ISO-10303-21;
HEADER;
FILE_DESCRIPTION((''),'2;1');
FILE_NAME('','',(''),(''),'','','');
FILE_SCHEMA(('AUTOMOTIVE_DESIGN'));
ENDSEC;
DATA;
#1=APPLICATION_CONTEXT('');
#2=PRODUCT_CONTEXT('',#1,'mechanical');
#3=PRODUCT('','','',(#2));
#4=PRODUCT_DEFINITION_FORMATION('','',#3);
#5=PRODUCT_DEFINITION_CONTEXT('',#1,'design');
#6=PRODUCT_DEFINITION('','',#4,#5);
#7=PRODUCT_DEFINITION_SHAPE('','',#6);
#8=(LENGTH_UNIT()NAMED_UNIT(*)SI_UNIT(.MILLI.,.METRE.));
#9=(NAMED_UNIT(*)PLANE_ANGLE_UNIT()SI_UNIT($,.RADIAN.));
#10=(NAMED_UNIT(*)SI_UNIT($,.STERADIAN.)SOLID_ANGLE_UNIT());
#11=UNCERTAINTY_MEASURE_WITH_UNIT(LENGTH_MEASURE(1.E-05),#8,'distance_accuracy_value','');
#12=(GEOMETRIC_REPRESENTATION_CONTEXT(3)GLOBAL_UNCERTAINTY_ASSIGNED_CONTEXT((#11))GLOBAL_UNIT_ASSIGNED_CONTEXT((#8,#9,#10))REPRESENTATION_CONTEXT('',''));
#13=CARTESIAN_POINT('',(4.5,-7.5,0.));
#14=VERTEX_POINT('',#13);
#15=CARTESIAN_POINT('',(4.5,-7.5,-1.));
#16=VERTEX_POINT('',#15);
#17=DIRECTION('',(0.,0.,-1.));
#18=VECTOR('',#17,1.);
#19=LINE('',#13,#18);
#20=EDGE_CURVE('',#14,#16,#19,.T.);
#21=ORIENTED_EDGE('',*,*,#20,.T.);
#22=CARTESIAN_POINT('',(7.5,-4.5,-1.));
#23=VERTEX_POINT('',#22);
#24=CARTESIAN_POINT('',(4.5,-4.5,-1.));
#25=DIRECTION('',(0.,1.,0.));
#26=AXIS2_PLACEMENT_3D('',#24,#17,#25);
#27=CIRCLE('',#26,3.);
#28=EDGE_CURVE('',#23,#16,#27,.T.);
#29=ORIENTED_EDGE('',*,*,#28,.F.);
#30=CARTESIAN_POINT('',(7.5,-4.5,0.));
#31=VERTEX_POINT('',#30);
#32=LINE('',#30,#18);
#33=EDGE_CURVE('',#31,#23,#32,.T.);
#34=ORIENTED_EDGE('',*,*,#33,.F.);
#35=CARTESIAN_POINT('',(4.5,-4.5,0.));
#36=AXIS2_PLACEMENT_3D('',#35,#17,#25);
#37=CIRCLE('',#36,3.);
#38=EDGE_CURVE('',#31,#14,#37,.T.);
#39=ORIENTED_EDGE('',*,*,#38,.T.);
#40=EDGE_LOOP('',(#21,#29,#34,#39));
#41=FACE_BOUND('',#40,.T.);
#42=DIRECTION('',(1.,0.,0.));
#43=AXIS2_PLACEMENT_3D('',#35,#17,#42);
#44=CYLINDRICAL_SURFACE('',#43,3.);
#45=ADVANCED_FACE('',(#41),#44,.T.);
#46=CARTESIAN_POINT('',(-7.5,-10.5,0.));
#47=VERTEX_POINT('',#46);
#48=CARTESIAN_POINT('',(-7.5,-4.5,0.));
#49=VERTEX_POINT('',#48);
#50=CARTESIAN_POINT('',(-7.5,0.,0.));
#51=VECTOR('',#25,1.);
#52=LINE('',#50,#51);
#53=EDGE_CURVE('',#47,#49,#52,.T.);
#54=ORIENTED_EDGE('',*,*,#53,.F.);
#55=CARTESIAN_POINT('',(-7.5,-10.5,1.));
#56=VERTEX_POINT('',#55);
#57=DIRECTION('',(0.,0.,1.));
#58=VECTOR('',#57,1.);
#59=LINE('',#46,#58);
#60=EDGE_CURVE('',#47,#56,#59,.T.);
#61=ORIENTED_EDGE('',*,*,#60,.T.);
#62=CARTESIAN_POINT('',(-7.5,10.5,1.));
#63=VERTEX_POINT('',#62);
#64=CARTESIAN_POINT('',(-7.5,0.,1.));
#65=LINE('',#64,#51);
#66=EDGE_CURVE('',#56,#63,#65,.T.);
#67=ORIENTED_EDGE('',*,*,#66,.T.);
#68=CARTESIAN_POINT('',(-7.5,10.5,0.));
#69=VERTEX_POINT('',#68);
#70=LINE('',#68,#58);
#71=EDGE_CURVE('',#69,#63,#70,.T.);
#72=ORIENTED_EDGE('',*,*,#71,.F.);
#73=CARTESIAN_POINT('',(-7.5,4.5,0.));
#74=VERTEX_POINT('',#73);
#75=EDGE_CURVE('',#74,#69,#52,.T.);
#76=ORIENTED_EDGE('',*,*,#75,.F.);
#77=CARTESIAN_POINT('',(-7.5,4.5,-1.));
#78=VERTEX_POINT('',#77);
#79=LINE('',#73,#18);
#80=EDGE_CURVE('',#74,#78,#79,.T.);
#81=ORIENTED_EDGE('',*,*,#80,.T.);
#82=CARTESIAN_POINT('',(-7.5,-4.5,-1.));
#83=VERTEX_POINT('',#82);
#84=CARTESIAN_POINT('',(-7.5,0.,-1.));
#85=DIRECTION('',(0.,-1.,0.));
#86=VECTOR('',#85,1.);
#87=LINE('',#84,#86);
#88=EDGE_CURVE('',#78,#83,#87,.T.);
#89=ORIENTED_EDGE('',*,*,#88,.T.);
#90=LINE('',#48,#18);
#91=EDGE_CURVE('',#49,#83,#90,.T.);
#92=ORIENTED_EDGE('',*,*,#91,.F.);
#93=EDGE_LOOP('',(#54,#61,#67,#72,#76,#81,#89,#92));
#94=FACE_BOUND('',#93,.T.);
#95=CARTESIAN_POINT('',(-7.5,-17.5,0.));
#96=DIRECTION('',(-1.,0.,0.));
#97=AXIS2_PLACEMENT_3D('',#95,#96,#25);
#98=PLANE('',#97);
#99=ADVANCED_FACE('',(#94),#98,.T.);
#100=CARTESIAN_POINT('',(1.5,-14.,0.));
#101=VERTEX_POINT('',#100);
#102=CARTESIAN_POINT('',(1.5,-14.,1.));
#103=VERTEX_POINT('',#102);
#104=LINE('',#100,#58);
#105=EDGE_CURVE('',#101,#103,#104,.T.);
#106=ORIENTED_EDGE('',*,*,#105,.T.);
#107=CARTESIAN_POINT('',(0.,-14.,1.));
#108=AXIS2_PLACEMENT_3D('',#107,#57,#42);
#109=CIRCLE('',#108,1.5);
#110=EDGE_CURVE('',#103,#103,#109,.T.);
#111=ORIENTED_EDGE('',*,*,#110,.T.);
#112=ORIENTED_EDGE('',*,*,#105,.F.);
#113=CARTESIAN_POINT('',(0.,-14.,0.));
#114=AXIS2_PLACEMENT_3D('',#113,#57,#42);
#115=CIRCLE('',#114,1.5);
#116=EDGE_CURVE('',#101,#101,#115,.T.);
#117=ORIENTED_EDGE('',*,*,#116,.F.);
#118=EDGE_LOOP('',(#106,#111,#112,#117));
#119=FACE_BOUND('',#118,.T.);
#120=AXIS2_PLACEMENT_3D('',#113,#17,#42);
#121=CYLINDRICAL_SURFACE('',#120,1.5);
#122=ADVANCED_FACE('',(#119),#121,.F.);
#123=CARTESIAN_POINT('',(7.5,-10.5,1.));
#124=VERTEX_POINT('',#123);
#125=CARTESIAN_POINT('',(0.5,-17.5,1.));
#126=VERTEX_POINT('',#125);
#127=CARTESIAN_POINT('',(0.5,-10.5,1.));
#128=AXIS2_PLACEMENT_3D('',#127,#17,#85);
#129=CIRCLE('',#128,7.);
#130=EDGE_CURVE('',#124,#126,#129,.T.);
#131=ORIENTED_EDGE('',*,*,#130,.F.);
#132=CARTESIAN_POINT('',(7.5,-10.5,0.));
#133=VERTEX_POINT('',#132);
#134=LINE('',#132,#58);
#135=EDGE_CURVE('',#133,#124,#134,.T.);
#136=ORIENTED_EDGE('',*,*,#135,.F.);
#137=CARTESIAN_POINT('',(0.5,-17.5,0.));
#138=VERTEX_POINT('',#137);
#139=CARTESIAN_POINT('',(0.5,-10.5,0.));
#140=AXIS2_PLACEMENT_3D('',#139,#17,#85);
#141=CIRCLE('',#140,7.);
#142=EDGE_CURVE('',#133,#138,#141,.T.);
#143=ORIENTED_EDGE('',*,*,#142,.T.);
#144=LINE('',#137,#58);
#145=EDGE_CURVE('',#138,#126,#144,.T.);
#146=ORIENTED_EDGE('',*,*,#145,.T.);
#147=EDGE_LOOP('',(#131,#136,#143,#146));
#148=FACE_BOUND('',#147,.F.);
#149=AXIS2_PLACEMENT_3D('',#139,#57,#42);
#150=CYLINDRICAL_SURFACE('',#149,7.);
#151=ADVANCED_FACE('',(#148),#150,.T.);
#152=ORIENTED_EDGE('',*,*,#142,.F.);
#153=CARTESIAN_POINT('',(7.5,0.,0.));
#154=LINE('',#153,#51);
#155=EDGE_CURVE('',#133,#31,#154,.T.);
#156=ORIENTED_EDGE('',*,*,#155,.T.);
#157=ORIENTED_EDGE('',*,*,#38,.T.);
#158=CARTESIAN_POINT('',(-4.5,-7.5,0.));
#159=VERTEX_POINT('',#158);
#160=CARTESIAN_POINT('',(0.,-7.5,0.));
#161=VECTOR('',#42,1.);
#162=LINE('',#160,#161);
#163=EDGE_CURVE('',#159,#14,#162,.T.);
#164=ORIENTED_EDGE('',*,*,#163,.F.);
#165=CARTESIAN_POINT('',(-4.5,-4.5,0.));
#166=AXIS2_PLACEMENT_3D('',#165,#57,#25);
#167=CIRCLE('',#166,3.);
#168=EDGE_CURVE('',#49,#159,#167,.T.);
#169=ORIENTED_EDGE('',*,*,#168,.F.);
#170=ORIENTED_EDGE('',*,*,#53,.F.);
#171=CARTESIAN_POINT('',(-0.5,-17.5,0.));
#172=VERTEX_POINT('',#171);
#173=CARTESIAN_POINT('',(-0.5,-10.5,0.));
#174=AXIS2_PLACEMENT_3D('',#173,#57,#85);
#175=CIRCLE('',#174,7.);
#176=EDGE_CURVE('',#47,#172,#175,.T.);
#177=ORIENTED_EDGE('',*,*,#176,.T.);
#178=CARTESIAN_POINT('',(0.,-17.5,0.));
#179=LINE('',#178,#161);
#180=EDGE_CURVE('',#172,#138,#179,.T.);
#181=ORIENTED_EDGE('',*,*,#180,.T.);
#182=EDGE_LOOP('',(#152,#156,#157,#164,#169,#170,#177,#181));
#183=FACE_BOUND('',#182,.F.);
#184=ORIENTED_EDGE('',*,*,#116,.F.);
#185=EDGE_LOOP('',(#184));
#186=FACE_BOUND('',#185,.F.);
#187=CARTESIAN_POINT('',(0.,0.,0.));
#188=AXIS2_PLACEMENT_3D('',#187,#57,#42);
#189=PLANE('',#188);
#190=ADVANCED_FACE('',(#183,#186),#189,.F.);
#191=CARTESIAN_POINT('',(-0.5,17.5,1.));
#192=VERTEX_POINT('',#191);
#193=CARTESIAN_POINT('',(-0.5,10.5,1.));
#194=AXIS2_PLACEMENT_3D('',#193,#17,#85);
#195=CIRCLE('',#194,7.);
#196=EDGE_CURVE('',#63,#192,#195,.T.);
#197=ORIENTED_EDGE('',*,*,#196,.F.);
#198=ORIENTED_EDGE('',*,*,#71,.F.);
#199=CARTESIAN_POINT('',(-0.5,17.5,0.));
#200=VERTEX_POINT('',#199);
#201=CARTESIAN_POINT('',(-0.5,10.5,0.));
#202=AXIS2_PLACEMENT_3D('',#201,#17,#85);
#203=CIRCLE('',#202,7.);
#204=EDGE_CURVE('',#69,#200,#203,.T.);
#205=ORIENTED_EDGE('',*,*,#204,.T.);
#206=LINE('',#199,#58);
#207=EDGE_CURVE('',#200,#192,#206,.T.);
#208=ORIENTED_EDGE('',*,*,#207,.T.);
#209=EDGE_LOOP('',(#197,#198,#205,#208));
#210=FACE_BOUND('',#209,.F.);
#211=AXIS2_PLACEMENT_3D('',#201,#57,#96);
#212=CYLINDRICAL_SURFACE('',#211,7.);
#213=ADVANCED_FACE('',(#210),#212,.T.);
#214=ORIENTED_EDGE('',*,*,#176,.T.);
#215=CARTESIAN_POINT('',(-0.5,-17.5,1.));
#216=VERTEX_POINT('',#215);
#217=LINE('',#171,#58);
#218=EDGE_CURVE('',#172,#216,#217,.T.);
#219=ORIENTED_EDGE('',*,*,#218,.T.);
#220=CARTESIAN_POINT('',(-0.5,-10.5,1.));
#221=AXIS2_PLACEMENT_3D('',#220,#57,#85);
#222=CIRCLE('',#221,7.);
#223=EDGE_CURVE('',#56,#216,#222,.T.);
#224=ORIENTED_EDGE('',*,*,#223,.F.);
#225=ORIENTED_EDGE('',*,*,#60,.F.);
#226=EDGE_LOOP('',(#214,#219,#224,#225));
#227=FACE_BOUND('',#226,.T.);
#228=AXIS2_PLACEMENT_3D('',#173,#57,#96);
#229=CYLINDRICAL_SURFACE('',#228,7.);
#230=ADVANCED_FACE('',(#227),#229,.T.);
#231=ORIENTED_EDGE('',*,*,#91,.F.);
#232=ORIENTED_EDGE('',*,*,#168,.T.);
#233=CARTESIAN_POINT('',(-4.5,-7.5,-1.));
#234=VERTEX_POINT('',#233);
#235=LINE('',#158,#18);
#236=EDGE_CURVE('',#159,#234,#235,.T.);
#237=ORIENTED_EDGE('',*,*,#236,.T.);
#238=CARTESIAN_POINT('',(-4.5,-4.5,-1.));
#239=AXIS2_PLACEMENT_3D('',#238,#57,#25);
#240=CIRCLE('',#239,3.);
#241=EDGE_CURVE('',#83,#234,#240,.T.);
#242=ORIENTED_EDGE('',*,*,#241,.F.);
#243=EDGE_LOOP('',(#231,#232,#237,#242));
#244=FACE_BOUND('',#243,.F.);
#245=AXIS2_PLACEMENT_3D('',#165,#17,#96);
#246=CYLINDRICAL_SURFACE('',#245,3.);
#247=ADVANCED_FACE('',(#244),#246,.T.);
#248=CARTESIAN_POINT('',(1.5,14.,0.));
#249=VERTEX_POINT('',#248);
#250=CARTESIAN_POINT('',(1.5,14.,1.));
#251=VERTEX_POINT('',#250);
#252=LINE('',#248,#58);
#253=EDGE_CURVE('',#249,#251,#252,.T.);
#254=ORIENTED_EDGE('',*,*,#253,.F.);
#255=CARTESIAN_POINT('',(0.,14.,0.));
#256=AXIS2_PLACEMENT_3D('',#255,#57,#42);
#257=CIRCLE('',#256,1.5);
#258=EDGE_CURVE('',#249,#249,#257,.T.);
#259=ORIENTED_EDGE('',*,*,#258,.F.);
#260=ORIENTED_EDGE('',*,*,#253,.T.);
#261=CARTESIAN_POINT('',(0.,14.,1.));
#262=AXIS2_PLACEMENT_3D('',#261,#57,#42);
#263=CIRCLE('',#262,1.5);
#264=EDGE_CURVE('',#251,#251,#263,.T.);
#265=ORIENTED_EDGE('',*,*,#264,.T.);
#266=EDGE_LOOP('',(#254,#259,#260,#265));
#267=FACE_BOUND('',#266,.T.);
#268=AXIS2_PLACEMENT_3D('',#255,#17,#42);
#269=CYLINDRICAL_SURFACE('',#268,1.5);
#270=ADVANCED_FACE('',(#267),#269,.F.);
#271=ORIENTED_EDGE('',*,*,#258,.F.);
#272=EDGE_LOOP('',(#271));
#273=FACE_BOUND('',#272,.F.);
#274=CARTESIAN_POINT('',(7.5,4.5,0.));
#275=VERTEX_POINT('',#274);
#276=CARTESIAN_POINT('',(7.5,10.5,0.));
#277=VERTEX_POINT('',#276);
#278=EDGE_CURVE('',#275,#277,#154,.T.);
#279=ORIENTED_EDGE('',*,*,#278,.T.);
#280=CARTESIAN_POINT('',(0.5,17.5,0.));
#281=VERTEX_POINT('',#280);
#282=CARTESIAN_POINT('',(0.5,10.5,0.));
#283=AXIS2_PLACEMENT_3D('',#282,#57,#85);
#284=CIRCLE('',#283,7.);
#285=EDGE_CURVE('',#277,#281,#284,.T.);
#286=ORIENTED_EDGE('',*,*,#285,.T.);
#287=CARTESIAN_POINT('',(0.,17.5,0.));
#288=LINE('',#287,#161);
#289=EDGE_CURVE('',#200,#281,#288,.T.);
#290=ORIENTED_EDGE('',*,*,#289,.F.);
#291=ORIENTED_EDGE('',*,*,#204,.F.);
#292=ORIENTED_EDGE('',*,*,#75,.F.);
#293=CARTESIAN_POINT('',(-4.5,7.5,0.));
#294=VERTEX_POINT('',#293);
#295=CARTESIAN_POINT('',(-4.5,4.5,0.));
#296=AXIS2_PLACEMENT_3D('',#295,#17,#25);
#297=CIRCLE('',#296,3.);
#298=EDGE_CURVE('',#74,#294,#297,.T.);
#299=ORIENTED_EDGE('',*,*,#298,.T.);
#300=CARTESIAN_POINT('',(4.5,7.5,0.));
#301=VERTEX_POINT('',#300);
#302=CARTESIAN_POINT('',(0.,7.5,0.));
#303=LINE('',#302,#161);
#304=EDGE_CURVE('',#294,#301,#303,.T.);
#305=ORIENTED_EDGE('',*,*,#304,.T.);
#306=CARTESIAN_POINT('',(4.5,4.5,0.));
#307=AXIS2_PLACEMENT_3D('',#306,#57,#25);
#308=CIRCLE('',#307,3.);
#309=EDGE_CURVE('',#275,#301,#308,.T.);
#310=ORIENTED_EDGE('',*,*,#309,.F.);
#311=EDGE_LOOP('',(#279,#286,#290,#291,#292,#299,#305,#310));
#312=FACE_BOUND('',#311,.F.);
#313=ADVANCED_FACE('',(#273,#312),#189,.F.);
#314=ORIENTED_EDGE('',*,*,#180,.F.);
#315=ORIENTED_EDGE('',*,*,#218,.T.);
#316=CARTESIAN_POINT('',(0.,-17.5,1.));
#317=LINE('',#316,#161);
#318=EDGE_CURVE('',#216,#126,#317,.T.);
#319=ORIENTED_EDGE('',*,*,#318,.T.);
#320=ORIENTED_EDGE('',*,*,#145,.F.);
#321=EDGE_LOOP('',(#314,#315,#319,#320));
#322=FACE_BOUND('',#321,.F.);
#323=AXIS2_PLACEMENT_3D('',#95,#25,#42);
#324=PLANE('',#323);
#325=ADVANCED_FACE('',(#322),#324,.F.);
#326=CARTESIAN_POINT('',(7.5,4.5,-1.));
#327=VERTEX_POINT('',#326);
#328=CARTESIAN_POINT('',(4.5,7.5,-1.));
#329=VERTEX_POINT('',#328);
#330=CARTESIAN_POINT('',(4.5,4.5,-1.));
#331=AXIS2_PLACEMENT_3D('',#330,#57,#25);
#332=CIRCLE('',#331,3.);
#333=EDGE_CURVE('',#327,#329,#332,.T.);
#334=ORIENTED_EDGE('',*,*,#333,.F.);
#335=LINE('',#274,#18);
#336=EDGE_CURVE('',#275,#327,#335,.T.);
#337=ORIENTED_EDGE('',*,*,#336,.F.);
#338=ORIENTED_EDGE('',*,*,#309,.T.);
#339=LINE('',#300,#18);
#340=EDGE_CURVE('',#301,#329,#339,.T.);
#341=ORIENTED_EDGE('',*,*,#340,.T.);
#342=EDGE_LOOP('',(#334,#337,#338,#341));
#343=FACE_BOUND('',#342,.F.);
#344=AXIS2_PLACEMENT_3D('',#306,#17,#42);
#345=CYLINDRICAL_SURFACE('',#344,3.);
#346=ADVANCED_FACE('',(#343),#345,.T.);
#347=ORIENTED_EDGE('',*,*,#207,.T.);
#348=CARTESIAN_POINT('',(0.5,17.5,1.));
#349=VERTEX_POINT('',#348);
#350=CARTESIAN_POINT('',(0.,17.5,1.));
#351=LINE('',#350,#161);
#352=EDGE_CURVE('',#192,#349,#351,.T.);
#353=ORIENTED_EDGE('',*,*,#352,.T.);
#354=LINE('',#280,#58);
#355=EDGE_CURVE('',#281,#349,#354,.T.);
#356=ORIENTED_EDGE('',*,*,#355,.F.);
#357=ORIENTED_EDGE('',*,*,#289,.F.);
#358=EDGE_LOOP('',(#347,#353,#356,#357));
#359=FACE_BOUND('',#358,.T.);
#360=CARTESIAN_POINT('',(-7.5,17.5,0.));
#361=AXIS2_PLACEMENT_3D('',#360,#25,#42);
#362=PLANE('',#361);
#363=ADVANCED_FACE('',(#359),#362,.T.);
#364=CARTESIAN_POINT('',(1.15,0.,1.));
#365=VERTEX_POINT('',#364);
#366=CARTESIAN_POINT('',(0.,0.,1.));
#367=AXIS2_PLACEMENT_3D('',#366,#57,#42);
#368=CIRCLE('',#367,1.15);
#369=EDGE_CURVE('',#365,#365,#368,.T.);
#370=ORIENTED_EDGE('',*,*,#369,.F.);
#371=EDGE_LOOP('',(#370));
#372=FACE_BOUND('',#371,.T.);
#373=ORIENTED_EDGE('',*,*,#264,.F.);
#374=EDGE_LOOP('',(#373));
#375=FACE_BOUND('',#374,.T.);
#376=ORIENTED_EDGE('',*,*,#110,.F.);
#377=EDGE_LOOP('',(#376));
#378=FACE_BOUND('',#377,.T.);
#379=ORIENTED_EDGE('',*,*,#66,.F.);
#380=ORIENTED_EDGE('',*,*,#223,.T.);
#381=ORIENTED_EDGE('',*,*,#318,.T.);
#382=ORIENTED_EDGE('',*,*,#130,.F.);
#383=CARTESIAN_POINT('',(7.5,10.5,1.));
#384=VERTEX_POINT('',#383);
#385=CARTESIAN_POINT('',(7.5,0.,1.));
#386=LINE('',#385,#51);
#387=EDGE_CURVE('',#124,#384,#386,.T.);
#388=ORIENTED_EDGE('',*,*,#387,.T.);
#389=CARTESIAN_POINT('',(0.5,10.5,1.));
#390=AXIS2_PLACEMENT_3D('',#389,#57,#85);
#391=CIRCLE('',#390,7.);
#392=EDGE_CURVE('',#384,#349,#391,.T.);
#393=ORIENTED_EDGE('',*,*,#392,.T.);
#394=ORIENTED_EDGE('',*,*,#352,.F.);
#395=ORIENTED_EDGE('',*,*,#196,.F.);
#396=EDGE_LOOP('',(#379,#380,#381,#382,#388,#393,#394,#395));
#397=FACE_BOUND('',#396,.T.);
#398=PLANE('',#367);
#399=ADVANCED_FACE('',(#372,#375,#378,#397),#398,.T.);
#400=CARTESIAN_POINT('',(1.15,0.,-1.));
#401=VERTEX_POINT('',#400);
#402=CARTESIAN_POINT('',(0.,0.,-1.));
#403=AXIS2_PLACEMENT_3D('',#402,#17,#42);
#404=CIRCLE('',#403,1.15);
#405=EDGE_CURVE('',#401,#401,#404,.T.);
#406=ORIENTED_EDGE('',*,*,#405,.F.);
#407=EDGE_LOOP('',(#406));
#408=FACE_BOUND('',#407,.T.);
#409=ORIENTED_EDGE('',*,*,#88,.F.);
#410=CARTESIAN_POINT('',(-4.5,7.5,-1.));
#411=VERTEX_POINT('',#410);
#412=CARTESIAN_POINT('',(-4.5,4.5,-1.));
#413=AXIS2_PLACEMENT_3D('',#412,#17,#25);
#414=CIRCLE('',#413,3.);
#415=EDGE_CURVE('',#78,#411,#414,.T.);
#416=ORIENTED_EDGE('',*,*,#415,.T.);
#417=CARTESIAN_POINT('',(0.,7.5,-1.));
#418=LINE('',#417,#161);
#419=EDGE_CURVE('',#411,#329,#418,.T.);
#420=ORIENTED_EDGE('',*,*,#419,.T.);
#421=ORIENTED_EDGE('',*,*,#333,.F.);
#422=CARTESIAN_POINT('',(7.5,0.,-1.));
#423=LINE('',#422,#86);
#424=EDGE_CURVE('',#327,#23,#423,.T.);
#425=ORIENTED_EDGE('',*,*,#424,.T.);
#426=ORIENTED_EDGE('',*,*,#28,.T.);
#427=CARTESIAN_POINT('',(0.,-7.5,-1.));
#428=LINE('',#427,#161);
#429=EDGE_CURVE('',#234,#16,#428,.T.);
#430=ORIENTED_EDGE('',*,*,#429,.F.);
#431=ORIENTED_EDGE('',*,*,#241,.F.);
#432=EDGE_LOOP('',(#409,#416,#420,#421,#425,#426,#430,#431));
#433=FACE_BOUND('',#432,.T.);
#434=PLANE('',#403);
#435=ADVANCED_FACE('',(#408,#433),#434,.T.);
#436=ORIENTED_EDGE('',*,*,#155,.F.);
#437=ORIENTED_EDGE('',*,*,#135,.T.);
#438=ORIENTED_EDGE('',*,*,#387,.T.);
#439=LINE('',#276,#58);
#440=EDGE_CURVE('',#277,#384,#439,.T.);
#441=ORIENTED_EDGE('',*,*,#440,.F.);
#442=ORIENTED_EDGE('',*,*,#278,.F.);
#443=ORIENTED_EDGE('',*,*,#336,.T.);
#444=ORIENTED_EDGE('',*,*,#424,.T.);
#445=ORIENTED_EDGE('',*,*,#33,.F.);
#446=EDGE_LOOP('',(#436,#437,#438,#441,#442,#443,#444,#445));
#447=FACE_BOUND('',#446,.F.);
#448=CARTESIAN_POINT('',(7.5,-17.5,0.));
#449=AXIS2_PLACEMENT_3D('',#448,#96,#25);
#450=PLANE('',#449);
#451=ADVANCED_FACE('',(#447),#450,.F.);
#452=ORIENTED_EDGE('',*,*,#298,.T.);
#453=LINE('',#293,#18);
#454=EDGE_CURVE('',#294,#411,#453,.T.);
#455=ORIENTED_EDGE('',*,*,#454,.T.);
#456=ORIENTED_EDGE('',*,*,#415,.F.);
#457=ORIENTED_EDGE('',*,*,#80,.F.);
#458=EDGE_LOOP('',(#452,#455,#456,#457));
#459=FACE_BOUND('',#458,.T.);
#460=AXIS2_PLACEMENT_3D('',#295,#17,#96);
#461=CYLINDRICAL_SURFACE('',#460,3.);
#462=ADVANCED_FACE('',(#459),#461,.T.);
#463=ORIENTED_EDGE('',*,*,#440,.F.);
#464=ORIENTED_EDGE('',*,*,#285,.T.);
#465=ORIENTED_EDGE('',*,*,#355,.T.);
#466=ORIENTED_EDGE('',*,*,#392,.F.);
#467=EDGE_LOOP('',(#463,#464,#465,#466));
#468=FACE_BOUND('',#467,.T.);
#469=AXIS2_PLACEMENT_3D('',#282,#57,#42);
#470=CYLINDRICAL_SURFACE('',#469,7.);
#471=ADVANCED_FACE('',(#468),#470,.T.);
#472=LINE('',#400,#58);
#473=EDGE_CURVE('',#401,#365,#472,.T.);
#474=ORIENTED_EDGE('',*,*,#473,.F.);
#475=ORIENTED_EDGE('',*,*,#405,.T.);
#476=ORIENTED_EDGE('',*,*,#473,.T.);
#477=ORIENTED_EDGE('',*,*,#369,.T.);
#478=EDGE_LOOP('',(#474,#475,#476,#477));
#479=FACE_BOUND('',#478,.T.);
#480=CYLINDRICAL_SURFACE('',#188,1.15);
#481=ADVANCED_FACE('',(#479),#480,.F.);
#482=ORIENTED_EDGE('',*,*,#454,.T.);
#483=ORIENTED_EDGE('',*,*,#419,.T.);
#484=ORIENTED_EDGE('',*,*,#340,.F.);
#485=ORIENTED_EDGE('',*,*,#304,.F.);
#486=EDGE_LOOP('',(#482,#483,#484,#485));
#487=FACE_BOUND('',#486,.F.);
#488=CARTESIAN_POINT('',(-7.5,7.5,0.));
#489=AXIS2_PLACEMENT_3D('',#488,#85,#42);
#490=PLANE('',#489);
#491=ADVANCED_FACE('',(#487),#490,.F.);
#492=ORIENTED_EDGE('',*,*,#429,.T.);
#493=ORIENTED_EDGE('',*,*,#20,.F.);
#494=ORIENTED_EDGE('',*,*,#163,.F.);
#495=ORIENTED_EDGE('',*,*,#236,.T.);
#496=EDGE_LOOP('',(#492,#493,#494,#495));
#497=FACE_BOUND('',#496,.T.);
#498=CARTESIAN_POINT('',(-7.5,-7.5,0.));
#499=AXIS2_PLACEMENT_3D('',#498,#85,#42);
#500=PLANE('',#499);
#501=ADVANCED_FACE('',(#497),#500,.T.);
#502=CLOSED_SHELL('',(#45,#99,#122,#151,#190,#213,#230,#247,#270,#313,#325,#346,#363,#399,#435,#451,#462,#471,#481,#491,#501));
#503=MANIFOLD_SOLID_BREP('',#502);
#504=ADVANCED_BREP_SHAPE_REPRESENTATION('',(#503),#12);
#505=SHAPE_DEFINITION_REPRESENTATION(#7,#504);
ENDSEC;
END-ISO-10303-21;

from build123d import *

# Parameters (mm, degrees)
F0_R     = 2.5
F0_R_2   = 1.15
F1_DEPTH = 1
F2_W     = 15
F2_H     = 15
F2_R     = 5
F2_R_2   = 2.5
F2_R_3   = 1.15
F3_DEPTH = 1
F4_R     = 3
F6_W     = 15
F6_H     = 35
F6_R     = 1.5
F6_R_2   = 1.15
F7_DEPTH = 1
F8_R     = 7


# Not quite as in the source:
# - a feature of the source that left no trace in its solid (it failed there, or was rolled back) is left out


with BuildPart() as f1:
    # F0 (on Top) → F1 (new body)
    with BuildSketch(Plane.XY):
        Circle(F0_R)
        Circle(F0_R_2, mode=Mode.SUBTRACT)
    extrude(amount=F1_DEPTH)

    # F2 (on face) → F3 (join)
    with BuildSketch(Plane(origin=(0, 0, 0), x_dir=(1, 0, 0), z_dir=(0, 0, -1))):
        Rectangle(F2_W, F2_H)
        Circle(F2_R, mode=Mode.SUBTRACT)
        Circle(F2_R)
        Circle(F2_R_2, mode=Mode.SUBTRACT)
        Circle(F2_R_2)
        Circle(F2_R_3, mode=Mode.SUBTRACT)
    extrude(amount=F3_DEPTH)

    # F4
    f4_edges = [f1.edges().sort_by_distance(p)[0] for p in [
        (-7.5, 7.5, -0.5),
        (7.5, 7.5, -0.5),
        (-7.5, -7.5, -0.5),
        (7.5, -7.5, -0.5),
    ]]
    fillet(f4_edges, radius=F4_R)

    # F6 (on face) → F7 (join)
    with BuildSketch(Plane.XY):
        Rectangle(F6_W, F6_H)
        with Locations((0, -14)):
            Circle(F6_R, mode=Mode.SUBTRACT)
        Circle(F6_R_2, mode=Mode.SUBTRACT)
        with Locations((0, 14)):
            Circle(F6_R, mode=Mode.SUBTRACT)
    extrude(amount=F7_DEPTH)

    # F8
    f8_edges = [f1.edges().sort_by_distance(p)[0] for p in [
        (-7.5, 17.5, 0.5),
        (7.5, 17.5, 0.5),
        (7.5, -17.5, 0.5),
        (-7.5, -17.5, 0.5),
    ]]
    fillet(f8_edges, radius=F8_R)


solid = f1.part
